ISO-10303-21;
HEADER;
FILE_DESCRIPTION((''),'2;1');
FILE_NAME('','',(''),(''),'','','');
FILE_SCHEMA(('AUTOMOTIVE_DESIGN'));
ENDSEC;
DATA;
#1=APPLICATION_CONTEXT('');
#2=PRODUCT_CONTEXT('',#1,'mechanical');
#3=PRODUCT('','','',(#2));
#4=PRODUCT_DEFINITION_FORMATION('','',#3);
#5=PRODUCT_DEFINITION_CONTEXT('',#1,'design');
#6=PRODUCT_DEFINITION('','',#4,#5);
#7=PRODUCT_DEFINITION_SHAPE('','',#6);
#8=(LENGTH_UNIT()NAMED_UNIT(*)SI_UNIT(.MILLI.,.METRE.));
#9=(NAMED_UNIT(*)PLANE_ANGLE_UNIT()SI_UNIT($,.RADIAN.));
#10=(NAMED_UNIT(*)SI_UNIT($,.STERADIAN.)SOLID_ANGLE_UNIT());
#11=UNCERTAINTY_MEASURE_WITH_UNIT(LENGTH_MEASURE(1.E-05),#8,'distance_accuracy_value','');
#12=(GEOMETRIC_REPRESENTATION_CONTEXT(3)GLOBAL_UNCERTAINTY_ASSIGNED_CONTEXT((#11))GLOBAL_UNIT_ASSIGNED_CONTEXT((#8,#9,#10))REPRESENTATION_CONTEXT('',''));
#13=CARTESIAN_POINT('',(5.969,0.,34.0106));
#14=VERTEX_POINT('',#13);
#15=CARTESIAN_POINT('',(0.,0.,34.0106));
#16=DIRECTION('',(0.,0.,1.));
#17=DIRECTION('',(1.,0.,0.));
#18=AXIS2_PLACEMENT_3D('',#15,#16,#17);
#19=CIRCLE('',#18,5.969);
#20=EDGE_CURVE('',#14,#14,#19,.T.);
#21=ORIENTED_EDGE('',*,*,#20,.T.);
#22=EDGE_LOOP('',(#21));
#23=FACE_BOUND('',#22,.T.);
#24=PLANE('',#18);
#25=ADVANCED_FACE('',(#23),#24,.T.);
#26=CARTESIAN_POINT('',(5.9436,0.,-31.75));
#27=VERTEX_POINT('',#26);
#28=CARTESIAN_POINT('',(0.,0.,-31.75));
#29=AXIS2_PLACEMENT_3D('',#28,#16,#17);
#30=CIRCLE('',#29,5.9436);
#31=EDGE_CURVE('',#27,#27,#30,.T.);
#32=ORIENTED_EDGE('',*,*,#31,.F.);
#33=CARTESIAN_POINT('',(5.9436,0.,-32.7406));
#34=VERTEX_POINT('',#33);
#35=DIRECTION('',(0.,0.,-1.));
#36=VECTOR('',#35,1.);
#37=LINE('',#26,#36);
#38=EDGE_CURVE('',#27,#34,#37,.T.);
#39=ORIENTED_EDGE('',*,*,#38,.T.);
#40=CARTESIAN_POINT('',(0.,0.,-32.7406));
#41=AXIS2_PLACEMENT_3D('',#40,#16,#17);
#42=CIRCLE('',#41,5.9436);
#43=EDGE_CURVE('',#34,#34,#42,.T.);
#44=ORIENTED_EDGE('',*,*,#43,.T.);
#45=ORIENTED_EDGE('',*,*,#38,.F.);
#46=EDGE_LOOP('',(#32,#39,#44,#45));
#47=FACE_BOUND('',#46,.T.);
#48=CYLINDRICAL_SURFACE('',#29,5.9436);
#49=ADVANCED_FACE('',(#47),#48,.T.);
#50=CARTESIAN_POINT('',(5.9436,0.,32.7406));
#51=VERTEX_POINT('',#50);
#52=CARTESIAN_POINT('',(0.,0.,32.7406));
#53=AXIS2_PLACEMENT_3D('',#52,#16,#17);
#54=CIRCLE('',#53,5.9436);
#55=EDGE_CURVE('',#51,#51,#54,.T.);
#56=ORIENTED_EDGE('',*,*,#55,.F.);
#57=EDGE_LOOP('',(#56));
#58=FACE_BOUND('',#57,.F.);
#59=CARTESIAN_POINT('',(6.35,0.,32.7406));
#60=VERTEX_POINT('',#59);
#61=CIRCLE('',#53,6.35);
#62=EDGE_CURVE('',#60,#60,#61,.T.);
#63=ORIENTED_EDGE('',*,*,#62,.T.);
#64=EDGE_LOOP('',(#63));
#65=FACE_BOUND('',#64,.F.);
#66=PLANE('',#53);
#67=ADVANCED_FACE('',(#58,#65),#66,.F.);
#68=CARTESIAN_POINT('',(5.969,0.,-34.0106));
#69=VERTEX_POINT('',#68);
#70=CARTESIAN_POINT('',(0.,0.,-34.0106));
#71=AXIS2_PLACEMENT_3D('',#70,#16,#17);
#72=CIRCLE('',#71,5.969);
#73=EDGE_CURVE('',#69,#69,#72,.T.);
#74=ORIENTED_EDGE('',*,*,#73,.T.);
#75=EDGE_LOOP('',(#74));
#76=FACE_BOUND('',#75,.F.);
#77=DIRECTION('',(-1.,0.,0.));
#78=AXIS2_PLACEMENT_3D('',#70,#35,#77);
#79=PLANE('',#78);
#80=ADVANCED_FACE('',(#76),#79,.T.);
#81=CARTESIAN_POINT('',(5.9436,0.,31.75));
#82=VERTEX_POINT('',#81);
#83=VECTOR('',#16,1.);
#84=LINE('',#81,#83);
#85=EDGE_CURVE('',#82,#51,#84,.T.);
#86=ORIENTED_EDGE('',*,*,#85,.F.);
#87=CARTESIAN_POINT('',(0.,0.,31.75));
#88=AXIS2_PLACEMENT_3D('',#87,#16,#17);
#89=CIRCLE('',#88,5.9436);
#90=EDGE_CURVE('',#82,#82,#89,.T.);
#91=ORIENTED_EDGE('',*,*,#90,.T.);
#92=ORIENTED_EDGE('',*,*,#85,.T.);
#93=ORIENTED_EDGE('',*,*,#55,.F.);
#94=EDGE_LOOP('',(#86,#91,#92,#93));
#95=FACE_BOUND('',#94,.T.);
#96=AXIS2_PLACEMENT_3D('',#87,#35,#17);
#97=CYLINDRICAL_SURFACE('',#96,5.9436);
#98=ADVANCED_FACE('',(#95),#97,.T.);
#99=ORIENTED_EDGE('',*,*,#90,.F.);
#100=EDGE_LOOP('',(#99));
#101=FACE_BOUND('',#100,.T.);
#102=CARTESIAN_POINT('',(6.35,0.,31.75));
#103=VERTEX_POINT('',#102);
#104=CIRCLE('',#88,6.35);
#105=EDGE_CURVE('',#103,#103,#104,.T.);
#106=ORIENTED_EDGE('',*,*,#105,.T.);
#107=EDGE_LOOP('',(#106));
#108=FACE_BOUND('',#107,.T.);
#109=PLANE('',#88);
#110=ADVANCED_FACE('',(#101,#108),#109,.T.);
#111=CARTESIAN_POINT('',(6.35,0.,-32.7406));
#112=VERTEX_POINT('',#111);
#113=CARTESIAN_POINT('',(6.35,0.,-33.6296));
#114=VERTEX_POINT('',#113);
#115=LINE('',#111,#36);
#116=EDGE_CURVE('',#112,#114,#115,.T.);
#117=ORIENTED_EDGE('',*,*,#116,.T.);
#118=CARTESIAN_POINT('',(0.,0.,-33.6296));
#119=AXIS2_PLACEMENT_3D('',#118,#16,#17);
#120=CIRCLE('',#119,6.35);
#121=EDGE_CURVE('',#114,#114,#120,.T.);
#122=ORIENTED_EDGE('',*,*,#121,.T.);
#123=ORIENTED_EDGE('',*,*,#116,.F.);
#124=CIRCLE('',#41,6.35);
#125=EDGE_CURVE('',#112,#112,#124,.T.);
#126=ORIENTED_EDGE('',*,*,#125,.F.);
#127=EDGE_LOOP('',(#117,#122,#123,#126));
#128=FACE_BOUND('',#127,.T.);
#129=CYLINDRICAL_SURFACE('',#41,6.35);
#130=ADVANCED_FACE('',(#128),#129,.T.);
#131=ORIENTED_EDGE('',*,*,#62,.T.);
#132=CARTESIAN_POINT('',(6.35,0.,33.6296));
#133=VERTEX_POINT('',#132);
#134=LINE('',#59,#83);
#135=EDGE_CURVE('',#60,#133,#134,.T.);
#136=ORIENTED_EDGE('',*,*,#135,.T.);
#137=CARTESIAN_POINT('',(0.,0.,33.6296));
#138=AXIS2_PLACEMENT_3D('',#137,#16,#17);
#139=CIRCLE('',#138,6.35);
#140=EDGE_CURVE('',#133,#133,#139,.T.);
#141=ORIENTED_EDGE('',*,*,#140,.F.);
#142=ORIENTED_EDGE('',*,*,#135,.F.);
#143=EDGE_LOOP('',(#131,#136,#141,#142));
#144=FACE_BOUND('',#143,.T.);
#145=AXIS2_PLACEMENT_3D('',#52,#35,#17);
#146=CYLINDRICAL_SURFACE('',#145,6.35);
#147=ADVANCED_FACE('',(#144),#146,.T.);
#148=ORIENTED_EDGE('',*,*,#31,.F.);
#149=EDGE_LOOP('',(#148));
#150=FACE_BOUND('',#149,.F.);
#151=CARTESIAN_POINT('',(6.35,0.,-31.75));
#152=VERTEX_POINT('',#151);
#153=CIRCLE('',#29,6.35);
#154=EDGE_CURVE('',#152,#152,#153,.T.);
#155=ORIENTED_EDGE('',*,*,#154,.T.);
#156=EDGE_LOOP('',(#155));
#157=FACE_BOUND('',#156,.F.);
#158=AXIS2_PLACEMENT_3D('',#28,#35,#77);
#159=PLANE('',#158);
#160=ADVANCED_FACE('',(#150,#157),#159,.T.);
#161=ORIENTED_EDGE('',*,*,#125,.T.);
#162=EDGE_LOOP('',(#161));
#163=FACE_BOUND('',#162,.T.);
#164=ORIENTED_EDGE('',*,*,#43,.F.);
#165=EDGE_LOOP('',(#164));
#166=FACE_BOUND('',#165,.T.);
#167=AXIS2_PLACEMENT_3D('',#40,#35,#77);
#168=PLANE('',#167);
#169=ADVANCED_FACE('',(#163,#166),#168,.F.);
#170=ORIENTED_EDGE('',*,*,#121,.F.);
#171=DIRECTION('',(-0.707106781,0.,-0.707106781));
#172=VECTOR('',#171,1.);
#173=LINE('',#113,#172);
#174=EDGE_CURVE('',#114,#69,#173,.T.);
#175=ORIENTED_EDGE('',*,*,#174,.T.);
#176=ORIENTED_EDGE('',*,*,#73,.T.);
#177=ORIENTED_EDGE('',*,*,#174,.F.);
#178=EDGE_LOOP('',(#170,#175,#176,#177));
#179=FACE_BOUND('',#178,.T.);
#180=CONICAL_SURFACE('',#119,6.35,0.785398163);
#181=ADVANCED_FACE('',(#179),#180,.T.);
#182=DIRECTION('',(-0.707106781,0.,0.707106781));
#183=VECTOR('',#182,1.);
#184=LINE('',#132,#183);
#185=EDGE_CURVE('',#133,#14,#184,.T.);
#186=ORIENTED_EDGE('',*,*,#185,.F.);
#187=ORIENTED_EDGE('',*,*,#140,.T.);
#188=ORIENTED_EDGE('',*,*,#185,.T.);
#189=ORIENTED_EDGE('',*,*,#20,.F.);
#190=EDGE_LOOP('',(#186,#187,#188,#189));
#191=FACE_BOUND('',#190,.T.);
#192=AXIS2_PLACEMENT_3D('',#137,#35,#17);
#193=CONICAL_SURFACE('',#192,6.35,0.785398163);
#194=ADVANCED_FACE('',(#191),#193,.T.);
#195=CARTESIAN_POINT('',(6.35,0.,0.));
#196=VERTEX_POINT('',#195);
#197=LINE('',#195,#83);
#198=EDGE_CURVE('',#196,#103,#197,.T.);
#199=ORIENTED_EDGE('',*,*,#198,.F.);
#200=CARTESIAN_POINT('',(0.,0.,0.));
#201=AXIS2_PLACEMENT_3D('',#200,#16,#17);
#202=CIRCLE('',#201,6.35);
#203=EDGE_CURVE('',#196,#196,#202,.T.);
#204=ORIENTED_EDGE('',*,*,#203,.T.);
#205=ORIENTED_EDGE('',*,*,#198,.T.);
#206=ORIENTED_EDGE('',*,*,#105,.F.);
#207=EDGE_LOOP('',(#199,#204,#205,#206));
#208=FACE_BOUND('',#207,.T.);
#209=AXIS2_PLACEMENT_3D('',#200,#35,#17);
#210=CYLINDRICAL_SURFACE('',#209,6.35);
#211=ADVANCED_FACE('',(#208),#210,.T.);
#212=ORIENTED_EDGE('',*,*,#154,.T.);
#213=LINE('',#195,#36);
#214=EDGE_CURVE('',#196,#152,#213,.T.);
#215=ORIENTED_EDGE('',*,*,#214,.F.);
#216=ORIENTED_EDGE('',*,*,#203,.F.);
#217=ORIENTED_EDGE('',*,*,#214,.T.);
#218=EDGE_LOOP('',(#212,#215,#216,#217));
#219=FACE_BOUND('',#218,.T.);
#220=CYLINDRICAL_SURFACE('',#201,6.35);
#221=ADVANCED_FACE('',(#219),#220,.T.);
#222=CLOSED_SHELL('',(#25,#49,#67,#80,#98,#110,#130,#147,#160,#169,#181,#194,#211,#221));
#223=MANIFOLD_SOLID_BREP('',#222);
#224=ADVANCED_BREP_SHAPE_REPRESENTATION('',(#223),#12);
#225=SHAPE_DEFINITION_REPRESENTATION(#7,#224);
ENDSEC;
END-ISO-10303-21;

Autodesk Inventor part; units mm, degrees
ref_plane "YZ Plane" through (0, 0, 0) normal (1, 0, 0) x (0, 1, 0)
ref_plane "XZ Plane" through (0, 0, 0) normal (0, 1, 0) x (-1, 0, 0)
ref_plane "XY Plane" through (0, 0, 0) normal (0, 0, 1) x (1, 0, 0)
sketch "Sketch1" plane through (0, 0, 0) normal (0, 0, 1) x (1, 0, 0)
  circle A0 centre (0, 0) radius 6.35
  dimension "d0" = 12.7
extrude "Extrusion1" add sketch "Sketch1" along normal blind 31.75
sketch "Sketch6" plane through (0, 0, 31.75) normal (0, 0, 1) x (1, 0, 0)
  circle A0 centre (0, 0) radius 6.35 projected
  circle A1 centre (0, 0) radius 5.9436
  dimension "d18" = 11.8872
extrude "Extrusion6" add sketch "Sketch6" along normal blind 0.9906 contours A1
sketch "Sketch7" plane through (0, 0, 32.7406) normal (0, 0, 1) x (1, 0, 0)
  circle A0 centre (0, 0) radius 6.35 projected
extrude "Extrusion7" add sketch "Sketch7" along normal blind 1.27
chamfer "Chamfer1" distance 0.381 angle 45 1 edges at (-6.35, 0, 34.0106)
mirror "Mirror2" about plane through (0, 0, 0) normal (0, 0, -1)
properties part number "Carriage Shaft - Lower" material "Aluminum 6061"
